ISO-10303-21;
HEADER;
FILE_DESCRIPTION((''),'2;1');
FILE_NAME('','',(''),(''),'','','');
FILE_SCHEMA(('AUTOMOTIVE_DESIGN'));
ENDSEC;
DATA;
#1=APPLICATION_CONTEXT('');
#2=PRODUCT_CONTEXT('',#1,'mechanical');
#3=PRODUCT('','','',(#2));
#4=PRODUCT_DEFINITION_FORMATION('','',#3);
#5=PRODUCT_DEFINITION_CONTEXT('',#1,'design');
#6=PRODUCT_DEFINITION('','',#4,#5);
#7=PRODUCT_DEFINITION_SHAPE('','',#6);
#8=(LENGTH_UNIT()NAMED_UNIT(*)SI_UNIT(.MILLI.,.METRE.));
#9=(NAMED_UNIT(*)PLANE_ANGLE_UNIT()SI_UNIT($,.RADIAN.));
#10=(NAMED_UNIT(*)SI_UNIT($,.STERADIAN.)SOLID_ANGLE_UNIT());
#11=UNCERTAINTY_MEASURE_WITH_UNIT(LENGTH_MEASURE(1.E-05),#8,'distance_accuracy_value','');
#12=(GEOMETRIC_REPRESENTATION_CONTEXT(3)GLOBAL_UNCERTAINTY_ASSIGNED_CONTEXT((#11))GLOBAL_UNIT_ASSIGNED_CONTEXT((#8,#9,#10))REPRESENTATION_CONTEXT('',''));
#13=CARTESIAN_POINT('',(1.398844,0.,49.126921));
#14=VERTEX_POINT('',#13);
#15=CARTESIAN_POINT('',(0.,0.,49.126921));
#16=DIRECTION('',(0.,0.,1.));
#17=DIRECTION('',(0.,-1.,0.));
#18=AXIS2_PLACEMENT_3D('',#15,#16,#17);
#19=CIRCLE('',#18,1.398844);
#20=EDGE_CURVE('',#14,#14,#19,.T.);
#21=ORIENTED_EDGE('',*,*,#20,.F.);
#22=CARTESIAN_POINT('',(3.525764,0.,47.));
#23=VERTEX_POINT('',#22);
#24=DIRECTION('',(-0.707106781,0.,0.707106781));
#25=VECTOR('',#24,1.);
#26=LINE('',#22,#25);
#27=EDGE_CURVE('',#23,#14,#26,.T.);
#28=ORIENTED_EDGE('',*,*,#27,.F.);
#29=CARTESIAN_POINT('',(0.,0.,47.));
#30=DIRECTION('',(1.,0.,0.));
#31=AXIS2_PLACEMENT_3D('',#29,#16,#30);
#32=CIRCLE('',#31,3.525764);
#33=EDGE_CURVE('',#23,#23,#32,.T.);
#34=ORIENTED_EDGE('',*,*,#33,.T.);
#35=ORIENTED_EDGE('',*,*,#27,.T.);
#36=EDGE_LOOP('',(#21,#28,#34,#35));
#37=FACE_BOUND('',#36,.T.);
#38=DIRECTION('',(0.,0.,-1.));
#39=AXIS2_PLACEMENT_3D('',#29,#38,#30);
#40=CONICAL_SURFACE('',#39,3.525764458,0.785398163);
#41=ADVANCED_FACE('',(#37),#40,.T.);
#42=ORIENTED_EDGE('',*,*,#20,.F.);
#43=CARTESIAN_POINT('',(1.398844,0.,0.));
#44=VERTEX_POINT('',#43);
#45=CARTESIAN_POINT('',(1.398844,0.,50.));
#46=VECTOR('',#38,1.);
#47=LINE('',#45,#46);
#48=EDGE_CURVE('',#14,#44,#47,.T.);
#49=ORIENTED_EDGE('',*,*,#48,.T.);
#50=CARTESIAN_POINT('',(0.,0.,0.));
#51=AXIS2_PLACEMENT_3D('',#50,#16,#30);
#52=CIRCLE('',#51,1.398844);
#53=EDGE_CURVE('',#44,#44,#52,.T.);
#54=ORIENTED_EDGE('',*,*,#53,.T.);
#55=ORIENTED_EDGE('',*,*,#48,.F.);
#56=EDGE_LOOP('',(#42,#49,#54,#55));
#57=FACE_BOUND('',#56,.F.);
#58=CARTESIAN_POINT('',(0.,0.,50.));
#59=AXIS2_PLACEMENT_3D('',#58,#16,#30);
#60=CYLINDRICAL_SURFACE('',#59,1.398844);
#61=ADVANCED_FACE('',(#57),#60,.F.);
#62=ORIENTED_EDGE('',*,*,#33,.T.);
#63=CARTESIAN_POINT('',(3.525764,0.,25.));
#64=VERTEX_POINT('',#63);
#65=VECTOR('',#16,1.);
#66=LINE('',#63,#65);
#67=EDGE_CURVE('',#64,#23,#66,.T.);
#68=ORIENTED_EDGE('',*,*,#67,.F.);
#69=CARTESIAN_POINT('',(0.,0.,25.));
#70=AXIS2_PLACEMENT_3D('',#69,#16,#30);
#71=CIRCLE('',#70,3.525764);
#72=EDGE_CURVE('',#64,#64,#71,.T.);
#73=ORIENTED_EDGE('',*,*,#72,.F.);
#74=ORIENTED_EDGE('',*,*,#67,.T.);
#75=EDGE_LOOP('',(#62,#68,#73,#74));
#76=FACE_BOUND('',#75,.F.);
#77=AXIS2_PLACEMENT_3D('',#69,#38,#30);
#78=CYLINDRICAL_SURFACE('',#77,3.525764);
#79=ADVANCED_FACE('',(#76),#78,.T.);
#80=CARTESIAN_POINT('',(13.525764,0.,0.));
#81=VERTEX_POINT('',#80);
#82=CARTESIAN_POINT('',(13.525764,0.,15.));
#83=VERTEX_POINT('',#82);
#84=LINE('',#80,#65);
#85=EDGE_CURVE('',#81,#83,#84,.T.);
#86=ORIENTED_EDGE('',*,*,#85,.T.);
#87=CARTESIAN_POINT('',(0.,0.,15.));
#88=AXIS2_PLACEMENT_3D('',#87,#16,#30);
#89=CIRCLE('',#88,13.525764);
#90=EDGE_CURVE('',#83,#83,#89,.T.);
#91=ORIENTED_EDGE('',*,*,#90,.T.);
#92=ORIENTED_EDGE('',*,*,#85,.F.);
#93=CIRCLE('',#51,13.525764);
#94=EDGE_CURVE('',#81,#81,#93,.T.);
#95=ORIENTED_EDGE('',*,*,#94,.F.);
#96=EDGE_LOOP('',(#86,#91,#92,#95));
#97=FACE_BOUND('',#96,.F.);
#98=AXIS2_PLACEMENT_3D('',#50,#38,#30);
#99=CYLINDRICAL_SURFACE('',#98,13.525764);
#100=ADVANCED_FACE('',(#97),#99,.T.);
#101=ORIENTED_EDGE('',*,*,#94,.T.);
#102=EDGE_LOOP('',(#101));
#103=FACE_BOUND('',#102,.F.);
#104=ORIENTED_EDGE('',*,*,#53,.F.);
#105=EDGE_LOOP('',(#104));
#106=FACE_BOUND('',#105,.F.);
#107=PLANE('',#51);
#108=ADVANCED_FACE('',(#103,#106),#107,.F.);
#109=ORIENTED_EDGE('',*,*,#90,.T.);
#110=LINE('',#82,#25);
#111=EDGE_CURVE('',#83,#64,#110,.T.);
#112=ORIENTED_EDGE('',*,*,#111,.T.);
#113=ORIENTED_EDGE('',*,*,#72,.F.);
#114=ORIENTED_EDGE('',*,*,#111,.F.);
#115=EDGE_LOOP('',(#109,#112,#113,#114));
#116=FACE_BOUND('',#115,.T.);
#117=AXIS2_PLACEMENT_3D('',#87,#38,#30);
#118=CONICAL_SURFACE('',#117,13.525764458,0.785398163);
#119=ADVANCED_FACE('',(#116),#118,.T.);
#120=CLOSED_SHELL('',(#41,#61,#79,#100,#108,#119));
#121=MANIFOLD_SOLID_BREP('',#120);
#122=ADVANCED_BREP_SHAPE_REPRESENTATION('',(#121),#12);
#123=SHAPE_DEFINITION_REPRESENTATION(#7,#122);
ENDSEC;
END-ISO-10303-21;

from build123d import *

# Parameters (mm, degrees)
F0_R     = 13.5257644579
F1_DEPTH = 25
F2_SIZE  = 10
F3_DEPTH = 25
F4_R     = 1.3988438113
F5_DEPTH = 100


# Not quite as in the source:
# - a fillet or chamfer that OpenCascade refuses, or shapes differently, is made with other operations: its cross-section is extruded or revolved along the edge and cut away or added


with BuildPart() as f1:
    # F0 (on Top) → F1 (new body)
    with BuildSketch(Plane.XY):
        Circle(F0_R)
    extrude(amount=F1_DEPTH)

    # F2
    f2_edges = [f1.edges().sort_by_distance(p)[0] for p in [
        (-13.525764, 0, 25),
    ]]
    chamfer(f2_edges, length=F2_SIZE)

    # F3 (add): a face of the model
    f3_faces = [f1.faces().sort_by_distance(p)[0] for p in [
        (0, 0, 25),
    ]]
    extrude(f3_faces, amount=F3_DEPTH)

    # F4 (on face) → F5 (cut)
    with BuildSketch(Plane.XY.offset(50)):
        Circle(F4_R)
    extrude(amount=-F5_DEPTH, mode=Mode.SUBTRACT)

    # F6: chamfer of 3 on 1 edges, made by hand

    # F6_s1 → F6_t2 (revolve, cut)
    with BuildSketch(Plane.XZ):
        Polygon((3.5257644579, 47), (0.5257644579, 50), (3.5257644579, 50), align=None)
    revolve(axis=Axis((0, 0, 50), (0, 0, 1)), mode=Mode.SUBTRACT)


solid = f1.part
